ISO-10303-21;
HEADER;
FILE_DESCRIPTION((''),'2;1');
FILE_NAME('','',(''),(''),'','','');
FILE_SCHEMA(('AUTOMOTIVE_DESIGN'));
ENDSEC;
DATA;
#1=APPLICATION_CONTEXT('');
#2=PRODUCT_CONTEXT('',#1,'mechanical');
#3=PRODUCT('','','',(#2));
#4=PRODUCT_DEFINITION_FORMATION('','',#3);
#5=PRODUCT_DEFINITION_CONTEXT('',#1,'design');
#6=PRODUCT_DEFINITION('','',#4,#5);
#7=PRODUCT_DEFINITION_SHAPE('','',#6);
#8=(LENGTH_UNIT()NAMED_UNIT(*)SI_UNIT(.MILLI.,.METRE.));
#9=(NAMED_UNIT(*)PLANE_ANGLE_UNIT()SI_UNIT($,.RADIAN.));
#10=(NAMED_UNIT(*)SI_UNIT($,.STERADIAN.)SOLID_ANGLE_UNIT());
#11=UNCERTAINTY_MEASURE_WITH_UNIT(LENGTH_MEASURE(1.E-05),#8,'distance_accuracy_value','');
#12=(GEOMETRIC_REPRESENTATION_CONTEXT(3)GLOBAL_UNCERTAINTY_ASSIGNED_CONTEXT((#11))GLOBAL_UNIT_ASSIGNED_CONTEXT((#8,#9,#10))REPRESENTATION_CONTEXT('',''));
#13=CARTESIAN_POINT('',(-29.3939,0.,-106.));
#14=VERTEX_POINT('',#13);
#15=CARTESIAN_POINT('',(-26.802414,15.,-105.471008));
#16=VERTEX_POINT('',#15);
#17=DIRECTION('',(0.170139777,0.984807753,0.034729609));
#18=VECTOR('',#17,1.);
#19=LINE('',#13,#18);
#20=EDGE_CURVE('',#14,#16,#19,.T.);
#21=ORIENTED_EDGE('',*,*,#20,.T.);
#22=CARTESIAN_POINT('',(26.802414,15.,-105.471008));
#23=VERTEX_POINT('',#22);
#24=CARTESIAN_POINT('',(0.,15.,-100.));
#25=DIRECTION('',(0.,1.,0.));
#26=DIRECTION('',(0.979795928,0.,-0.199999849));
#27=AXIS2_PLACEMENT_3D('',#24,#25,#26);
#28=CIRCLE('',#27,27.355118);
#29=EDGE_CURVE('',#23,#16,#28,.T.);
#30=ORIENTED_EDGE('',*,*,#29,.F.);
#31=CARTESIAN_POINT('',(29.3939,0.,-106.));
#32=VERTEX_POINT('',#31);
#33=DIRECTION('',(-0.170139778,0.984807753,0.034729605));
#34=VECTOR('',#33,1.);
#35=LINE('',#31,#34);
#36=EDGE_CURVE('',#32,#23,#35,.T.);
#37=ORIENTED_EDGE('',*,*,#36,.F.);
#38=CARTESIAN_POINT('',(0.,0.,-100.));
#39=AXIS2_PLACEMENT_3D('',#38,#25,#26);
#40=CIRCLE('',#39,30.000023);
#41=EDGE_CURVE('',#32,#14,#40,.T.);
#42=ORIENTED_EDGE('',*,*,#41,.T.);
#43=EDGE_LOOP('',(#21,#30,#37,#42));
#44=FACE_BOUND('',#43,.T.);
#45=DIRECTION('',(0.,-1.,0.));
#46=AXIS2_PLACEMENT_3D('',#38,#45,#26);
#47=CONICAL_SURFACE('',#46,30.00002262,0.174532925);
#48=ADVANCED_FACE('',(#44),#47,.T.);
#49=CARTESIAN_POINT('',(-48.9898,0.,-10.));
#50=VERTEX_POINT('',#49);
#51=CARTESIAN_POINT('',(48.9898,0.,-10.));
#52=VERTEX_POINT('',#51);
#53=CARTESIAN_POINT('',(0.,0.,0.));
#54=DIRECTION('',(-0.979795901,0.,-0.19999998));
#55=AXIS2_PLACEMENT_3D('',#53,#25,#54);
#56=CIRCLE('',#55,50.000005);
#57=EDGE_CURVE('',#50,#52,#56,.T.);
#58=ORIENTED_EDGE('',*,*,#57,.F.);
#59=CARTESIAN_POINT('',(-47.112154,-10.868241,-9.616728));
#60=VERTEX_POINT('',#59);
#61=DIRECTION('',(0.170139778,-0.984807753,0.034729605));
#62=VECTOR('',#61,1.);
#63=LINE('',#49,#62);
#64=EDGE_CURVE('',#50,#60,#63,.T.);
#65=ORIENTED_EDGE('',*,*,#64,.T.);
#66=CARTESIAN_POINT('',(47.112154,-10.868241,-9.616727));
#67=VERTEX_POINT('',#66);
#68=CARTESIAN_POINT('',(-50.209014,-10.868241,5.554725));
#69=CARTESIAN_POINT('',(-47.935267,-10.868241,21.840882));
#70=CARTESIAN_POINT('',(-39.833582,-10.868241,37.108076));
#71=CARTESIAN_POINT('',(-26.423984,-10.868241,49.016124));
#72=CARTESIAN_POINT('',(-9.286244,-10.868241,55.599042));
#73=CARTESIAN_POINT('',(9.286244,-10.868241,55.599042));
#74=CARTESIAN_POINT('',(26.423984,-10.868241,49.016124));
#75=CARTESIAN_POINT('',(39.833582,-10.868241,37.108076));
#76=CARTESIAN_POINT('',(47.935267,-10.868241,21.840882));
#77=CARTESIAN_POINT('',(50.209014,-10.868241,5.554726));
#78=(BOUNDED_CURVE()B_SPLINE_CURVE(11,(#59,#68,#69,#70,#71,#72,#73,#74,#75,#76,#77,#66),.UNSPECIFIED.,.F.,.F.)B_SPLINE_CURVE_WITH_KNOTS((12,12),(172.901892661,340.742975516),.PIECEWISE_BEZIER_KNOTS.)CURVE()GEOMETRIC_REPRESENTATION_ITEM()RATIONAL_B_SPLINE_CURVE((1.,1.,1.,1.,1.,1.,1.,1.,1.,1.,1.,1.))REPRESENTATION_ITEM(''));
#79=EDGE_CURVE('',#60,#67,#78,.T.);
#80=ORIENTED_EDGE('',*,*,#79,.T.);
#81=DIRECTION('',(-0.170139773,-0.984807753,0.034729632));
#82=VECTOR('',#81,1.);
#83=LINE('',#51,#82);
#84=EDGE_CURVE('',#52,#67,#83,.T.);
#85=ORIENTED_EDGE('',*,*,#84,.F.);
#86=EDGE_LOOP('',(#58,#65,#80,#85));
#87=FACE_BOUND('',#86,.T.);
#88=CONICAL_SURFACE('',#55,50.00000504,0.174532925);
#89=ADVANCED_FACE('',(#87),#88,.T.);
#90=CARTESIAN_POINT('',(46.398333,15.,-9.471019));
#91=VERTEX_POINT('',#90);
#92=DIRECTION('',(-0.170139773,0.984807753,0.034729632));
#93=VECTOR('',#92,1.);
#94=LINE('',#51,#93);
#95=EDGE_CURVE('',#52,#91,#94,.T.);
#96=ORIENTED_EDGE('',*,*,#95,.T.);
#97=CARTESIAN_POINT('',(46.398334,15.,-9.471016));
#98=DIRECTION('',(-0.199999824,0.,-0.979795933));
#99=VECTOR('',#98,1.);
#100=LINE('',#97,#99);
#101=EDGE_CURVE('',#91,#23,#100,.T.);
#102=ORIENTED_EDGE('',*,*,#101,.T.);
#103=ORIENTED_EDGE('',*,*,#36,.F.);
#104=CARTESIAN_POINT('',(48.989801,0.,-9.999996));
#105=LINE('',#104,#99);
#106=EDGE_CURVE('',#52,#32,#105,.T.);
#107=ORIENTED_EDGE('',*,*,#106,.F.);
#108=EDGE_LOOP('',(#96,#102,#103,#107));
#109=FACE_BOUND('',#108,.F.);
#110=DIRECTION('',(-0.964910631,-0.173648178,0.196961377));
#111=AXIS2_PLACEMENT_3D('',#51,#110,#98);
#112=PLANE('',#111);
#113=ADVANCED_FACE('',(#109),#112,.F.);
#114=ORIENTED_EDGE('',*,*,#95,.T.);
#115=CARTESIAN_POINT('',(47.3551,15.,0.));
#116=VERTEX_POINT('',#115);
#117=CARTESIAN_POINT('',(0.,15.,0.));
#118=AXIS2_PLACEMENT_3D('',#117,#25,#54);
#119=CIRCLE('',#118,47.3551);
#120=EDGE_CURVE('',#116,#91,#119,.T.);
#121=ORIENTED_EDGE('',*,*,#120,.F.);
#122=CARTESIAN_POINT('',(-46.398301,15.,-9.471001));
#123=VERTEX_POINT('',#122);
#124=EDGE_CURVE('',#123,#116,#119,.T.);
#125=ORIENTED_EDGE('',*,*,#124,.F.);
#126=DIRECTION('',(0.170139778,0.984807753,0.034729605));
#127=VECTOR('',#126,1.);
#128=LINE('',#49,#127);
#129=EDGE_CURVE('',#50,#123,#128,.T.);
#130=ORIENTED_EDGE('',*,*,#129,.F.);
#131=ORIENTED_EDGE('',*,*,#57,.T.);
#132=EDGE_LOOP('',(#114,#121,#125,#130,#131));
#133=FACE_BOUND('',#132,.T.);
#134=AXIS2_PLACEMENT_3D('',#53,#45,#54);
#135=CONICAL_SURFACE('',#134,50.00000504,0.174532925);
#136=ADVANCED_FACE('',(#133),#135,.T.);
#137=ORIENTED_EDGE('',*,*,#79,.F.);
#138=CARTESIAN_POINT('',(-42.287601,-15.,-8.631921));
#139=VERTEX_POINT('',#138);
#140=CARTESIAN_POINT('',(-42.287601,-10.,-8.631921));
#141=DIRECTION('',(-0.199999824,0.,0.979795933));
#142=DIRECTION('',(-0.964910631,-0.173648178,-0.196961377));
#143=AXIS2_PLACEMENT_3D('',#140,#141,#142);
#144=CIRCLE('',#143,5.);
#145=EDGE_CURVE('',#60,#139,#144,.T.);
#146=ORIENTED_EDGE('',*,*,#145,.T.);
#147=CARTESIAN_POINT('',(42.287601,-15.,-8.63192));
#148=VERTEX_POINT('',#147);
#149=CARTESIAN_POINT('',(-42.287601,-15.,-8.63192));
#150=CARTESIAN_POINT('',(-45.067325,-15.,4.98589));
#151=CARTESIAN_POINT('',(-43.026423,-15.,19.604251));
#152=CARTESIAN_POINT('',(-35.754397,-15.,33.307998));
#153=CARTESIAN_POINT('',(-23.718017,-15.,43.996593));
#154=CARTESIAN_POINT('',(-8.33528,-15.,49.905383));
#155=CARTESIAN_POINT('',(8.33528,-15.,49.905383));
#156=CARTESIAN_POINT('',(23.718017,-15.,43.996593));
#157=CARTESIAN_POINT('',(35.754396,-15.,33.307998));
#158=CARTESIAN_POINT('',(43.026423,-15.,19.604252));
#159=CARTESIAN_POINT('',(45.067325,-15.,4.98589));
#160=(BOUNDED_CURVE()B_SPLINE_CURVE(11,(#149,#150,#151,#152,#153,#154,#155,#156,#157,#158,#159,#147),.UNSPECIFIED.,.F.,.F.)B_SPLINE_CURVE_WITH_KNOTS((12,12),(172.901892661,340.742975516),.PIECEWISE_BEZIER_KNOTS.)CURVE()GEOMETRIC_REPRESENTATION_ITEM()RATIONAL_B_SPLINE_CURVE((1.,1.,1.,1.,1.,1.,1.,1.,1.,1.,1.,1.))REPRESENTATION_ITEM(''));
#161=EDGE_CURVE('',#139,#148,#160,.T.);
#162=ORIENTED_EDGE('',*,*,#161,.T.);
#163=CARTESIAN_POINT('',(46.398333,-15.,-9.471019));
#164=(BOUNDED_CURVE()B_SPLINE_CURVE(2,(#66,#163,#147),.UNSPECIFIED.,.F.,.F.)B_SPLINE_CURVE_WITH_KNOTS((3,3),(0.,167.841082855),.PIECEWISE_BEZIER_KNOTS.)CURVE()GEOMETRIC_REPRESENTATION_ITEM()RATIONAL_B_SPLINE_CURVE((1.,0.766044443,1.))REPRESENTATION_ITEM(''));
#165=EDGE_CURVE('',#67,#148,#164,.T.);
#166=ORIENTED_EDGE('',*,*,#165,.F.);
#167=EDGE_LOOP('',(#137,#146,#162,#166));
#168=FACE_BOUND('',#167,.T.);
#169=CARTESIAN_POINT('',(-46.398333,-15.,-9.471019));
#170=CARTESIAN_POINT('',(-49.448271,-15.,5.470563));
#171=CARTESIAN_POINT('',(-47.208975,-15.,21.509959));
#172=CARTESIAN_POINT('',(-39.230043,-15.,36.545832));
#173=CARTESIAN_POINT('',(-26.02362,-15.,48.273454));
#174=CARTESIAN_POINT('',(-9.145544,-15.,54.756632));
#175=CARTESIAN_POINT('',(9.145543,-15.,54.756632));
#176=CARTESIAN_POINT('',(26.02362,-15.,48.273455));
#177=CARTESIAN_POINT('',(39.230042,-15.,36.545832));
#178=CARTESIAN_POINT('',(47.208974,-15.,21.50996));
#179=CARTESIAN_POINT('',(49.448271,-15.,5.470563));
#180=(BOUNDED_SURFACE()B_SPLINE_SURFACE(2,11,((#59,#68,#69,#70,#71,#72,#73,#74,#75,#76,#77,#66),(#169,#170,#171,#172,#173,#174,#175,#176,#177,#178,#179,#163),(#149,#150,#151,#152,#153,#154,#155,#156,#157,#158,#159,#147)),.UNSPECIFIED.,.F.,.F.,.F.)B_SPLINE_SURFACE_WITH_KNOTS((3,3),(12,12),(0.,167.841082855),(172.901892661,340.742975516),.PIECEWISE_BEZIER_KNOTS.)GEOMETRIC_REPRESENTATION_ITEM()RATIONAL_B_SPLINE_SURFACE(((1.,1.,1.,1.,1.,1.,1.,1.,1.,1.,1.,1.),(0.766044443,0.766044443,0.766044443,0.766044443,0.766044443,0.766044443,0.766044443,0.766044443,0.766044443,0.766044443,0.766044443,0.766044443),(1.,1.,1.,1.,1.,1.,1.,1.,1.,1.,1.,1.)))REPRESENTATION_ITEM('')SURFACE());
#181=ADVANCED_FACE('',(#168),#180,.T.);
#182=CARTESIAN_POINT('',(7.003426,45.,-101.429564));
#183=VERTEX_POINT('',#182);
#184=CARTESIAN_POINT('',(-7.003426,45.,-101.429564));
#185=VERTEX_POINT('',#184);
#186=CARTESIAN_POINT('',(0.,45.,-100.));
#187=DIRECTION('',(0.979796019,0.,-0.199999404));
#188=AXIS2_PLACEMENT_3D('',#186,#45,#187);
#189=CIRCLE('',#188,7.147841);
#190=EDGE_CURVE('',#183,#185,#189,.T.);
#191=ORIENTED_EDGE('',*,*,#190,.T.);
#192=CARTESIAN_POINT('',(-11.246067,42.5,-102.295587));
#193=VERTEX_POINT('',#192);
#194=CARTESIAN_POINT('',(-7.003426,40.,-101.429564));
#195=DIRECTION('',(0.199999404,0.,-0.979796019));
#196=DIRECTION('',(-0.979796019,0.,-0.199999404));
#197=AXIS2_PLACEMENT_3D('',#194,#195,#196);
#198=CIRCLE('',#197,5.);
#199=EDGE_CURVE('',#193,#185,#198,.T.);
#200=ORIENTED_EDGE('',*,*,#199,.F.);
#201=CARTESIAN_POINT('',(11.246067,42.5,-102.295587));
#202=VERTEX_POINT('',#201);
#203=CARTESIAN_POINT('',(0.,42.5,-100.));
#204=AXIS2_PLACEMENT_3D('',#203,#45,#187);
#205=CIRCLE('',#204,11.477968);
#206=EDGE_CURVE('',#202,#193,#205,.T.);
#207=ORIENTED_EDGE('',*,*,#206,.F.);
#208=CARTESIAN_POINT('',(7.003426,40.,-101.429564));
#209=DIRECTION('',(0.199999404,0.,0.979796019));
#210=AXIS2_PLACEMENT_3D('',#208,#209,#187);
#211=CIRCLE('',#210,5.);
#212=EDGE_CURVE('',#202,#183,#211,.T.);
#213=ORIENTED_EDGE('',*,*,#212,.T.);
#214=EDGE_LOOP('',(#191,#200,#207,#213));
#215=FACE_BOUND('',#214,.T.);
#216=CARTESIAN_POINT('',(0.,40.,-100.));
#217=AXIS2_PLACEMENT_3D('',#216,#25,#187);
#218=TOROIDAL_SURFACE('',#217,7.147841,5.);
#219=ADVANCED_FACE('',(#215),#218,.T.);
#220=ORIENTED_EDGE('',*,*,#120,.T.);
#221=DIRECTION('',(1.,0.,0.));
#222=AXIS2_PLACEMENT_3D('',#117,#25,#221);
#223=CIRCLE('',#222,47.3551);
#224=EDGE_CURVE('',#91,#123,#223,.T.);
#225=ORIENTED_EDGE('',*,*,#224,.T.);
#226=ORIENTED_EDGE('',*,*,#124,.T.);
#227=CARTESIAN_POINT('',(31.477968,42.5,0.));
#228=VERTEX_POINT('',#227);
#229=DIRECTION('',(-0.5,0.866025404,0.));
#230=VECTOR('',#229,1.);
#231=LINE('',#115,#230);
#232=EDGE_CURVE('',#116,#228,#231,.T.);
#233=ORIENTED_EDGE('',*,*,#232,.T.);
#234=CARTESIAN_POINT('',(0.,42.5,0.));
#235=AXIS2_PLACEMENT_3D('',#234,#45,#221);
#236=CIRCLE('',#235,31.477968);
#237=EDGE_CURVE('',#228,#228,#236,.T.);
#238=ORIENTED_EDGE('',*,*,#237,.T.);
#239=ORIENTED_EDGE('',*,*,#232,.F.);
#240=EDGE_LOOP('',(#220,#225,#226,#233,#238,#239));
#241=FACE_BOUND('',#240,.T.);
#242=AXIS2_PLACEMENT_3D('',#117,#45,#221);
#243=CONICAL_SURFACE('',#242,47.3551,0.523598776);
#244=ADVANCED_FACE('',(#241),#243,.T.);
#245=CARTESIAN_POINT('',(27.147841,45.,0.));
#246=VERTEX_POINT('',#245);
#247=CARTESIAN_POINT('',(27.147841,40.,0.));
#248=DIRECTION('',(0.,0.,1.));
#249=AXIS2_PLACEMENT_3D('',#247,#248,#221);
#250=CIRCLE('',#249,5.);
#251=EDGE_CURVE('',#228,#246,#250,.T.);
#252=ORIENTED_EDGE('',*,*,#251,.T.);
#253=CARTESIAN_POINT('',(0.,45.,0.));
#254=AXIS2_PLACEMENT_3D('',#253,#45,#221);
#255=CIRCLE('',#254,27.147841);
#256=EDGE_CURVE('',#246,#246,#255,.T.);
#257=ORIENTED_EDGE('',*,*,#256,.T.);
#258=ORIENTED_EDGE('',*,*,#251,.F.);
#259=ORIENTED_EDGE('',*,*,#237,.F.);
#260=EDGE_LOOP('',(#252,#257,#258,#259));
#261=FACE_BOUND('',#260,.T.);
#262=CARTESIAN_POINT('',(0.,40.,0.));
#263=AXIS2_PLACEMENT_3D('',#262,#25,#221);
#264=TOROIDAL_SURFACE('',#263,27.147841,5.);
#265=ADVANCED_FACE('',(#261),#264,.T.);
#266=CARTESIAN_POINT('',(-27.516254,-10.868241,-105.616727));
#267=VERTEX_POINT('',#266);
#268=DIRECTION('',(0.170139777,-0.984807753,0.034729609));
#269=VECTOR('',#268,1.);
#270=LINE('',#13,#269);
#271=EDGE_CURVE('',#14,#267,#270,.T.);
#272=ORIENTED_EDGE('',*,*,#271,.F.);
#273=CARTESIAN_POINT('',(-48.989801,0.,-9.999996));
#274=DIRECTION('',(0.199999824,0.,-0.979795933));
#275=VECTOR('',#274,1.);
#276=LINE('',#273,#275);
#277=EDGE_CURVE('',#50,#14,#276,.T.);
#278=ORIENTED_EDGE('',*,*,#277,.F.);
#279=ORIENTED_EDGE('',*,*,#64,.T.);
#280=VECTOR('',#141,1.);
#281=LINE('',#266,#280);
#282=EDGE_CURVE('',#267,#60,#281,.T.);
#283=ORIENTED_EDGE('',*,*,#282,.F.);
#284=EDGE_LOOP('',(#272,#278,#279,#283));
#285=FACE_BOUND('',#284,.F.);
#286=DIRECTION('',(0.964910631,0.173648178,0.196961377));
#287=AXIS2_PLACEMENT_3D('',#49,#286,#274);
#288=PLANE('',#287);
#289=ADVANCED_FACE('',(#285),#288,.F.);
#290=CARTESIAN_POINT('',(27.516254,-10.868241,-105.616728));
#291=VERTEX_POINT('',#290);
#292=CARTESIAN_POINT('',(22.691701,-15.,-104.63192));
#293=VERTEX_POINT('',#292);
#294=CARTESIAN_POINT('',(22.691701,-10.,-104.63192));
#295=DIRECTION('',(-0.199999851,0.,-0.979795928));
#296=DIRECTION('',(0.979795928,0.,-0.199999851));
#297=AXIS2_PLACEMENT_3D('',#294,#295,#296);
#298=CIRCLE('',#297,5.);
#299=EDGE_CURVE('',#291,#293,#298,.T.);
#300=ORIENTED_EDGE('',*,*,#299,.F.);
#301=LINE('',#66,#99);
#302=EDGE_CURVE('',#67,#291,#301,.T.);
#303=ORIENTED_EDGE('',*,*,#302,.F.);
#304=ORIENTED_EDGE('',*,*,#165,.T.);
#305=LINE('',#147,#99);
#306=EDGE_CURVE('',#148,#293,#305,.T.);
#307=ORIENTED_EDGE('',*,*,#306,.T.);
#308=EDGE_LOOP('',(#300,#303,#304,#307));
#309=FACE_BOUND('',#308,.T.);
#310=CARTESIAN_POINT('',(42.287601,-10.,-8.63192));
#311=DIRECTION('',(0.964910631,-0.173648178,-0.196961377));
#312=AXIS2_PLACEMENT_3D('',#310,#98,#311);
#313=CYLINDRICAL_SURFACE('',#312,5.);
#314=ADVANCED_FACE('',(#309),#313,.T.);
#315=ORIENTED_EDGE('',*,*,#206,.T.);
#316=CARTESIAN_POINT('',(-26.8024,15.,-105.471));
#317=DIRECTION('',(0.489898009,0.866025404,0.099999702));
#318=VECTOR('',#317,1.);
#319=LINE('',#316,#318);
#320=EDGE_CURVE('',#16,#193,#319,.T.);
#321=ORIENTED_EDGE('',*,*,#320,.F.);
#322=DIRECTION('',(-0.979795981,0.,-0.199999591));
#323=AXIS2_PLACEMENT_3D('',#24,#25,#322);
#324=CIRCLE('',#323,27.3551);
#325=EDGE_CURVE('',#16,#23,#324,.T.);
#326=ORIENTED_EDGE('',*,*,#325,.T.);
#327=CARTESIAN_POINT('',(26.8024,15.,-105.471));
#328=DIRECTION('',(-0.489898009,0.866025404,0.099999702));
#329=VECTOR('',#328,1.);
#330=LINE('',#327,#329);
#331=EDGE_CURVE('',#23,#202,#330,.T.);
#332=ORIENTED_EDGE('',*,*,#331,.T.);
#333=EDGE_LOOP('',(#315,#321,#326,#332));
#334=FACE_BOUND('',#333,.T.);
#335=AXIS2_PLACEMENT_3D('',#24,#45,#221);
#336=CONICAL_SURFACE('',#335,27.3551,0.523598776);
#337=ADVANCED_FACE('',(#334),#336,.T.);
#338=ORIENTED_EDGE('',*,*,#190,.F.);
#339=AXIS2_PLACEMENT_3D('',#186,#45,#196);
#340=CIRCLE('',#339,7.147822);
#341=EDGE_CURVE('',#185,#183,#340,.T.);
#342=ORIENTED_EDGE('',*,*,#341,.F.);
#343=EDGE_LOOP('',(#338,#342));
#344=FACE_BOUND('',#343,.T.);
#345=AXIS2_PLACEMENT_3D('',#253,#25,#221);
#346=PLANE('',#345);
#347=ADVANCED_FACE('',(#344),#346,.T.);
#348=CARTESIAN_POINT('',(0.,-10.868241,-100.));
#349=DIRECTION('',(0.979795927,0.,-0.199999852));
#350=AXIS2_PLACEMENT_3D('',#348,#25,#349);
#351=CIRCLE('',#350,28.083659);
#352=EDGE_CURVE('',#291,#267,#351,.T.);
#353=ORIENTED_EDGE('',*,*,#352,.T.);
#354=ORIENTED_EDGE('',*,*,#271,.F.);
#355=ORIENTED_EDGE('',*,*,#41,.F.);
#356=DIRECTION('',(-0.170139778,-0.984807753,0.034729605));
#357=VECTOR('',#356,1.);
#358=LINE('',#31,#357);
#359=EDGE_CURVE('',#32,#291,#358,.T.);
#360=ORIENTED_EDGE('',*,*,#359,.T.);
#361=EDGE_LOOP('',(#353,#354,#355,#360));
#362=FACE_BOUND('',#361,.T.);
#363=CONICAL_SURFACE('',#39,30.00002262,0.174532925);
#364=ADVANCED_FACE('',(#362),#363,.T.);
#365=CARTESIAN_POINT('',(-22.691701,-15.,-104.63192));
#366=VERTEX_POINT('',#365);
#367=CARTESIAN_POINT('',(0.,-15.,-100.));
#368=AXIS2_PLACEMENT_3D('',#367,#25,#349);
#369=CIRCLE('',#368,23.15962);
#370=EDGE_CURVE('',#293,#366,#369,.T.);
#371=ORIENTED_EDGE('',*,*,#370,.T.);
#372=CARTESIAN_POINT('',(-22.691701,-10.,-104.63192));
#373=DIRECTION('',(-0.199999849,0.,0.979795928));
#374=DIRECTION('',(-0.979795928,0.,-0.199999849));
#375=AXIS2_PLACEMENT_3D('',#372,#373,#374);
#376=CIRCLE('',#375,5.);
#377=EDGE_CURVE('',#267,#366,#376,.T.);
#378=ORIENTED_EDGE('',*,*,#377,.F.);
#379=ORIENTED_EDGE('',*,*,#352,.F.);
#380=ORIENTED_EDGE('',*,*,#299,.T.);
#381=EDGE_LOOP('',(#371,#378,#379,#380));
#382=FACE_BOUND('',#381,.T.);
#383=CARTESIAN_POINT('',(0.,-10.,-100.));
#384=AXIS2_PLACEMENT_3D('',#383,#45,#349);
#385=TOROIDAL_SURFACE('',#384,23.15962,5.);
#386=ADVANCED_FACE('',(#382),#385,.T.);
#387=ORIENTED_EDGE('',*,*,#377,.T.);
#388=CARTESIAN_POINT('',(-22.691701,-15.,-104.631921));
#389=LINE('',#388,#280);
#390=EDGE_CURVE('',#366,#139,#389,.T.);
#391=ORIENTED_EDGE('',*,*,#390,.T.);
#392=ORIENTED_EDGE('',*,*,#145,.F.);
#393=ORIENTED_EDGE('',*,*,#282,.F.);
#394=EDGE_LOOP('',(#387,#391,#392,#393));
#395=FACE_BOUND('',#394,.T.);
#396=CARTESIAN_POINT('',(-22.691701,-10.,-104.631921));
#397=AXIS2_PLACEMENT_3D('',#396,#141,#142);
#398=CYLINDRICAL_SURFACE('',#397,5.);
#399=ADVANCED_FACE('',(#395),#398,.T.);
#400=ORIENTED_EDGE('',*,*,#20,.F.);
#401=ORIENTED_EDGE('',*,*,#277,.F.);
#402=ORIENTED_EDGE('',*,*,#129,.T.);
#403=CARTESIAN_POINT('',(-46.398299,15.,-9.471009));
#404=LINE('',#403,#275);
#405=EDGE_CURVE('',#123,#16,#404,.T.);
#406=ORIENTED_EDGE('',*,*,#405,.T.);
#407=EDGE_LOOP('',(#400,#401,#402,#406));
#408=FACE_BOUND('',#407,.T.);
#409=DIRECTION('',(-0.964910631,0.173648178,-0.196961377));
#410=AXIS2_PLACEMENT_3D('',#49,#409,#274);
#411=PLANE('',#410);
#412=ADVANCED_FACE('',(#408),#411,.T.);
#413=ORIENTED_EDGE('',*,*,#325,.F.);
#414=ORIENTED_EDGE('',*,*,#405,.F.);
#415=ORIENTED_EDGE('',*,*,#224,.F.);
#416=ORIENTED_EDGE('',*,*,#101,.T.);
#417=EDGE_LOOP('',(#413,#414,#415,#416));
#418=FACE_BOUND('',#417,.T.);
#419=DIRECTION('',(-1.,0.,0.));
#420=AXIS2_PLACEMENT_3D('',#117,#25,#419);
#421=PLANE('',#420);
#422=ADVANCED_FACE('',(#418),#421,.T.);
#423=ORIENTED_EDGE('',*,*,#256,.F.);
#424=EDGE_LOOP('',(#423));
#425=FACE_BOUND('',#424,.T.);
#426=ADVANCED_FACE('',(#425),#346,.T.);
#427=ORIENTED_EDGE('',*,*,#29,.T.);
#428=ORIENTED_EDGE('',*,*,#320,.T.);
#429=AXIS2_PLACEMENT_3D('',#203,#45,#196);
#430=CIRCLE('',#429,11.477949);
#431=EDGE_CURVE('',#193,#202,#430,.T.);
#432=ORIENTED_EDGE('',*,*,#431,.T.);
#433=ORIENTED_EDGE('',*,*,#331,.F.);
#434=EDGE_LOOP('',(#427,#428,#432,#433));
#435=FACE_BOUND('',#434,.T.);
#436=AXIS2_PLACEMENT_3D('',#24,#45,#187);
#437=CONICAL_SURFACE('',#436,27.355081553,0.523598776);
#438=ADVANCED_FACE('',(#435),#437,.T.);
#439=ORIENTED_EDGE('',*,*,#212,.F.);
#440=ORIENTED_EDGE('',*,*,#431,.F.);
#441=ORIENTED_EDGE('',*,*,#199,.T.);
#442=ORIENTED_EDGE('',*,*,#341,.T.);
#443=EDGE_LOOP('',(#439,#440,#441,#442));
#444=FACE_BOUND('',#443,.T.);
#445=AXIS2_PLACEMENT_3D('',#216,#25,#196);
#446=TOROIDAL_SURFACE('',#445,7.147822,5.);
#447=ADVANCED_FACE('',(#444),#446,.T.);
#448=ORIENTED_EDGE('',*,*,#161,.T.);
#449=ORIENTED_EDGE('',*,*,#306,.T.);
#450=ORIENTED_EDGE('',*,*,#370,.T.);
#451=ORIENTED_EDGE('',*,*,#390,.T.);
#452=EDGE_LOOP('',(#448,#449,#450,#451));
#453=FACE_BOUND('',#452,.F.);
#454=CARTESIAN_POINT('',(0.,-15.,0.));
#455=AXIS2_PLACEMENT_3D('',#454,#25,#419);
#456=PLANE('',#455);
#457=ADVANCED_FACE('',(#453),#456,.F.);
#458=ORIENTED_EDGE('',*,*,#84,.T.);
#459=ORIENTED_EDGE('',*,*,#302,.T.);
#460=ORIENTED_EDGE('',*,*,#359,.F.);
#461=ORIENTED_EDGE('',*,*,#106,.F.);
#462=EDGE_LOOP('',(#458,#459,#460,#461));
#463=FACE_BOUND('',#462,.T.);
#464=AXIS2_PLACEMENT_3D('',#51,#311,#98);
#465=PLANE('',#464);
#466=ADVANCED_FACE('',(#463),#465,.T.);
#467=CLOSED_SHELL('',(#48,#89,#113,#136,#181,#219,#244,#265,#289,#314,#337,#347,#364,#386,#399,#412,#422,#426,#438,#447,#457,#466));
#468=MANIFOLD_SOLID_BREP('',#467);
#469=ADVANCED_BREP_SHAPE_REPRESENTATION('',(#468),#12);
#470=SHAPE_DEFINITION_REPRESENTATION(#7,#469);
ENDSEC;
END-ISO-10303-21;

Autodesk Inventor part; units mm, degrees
ref_plane "YZ Plane" through (0, 0, 0) normal (1, 0, 0) x (0, 1, 0)
ref_plane "XZ Plane" through (0, 0, 0) normal (0, 1, 0) x (-1, 0, 0)
sketch "Sketch1" plane through (0, 0, 0) normal (0, 1, 0) x (-1, 0, 0)
  arc A0 (-48.9898, -10) -> (48.9898, -10) centre (0, 0) ccw construction
  line L0 (0, 0) -> (0, -100) construction
  arc A1 (29.3939, -106) -> (-29.3939, -106) centre (0, -100) ccw construction
  line L1 (48.9898, -10) -> (29.3939, -106)
  line L2 (-48.9898, -10) -> (-29.3939, -106)
  arc A2 (48.9898, -10) -> (-48.9898, -10) centre (0, 0) ccw
  arc A3 (-29.3939, -106) -> (29.3939, -106) centre (0, -100) ccw
  dimension "d0" = 100
  dimension "d1" = 100
  dimension "d2" = 60
extrude "Extrusion1" add sketch "Sketch1" along normal mid plane 30 draft -10
ref_plane "Work Plane1" through (47.6941, 7.5, -9.7355) normal (0, 1, 0) x (1, 0, 0)
sketch "Sketch2" plane through (0, 15, 0) normal (0, 1, 0) x (1, 0, 0)
  line L0 (-46.3983, 9.471) -> (-26.8024, 105.471) projected
  circle A0 centre (0, 0) radius 47.3551
extrude "Extrusion2" add sketch "Sketch2" along normal blind 30 draft -30
sketch "Sketch3" plane through (0, 15, 0) normal (0, 1, 0) x (1, 0, 0)
  arc A0 (26.8024, 105.471) -> (-26.8024, 105.471) centre (0, 100) ccw projected
  circle A1 centre (0, 100) radius 27.3551
  point P0 (0, 0)
  point P1 (-26.8024, 105.471)
  dimension "d7" = 54.7102
extrude "Extrusion3" add sketch "Sketch3" along normal blind 30 draft -30
fillet "Fillet1" radius 5 6 edges at (-30.0346, 45, 0) (-9.8318, 45, -97.9931) (0, -15, -127.3551) (-36.6004, -15, -57.471) (0, -15, 47.3551) (36.6004, -15, -57.471)
properties part number "LE-1.1"
